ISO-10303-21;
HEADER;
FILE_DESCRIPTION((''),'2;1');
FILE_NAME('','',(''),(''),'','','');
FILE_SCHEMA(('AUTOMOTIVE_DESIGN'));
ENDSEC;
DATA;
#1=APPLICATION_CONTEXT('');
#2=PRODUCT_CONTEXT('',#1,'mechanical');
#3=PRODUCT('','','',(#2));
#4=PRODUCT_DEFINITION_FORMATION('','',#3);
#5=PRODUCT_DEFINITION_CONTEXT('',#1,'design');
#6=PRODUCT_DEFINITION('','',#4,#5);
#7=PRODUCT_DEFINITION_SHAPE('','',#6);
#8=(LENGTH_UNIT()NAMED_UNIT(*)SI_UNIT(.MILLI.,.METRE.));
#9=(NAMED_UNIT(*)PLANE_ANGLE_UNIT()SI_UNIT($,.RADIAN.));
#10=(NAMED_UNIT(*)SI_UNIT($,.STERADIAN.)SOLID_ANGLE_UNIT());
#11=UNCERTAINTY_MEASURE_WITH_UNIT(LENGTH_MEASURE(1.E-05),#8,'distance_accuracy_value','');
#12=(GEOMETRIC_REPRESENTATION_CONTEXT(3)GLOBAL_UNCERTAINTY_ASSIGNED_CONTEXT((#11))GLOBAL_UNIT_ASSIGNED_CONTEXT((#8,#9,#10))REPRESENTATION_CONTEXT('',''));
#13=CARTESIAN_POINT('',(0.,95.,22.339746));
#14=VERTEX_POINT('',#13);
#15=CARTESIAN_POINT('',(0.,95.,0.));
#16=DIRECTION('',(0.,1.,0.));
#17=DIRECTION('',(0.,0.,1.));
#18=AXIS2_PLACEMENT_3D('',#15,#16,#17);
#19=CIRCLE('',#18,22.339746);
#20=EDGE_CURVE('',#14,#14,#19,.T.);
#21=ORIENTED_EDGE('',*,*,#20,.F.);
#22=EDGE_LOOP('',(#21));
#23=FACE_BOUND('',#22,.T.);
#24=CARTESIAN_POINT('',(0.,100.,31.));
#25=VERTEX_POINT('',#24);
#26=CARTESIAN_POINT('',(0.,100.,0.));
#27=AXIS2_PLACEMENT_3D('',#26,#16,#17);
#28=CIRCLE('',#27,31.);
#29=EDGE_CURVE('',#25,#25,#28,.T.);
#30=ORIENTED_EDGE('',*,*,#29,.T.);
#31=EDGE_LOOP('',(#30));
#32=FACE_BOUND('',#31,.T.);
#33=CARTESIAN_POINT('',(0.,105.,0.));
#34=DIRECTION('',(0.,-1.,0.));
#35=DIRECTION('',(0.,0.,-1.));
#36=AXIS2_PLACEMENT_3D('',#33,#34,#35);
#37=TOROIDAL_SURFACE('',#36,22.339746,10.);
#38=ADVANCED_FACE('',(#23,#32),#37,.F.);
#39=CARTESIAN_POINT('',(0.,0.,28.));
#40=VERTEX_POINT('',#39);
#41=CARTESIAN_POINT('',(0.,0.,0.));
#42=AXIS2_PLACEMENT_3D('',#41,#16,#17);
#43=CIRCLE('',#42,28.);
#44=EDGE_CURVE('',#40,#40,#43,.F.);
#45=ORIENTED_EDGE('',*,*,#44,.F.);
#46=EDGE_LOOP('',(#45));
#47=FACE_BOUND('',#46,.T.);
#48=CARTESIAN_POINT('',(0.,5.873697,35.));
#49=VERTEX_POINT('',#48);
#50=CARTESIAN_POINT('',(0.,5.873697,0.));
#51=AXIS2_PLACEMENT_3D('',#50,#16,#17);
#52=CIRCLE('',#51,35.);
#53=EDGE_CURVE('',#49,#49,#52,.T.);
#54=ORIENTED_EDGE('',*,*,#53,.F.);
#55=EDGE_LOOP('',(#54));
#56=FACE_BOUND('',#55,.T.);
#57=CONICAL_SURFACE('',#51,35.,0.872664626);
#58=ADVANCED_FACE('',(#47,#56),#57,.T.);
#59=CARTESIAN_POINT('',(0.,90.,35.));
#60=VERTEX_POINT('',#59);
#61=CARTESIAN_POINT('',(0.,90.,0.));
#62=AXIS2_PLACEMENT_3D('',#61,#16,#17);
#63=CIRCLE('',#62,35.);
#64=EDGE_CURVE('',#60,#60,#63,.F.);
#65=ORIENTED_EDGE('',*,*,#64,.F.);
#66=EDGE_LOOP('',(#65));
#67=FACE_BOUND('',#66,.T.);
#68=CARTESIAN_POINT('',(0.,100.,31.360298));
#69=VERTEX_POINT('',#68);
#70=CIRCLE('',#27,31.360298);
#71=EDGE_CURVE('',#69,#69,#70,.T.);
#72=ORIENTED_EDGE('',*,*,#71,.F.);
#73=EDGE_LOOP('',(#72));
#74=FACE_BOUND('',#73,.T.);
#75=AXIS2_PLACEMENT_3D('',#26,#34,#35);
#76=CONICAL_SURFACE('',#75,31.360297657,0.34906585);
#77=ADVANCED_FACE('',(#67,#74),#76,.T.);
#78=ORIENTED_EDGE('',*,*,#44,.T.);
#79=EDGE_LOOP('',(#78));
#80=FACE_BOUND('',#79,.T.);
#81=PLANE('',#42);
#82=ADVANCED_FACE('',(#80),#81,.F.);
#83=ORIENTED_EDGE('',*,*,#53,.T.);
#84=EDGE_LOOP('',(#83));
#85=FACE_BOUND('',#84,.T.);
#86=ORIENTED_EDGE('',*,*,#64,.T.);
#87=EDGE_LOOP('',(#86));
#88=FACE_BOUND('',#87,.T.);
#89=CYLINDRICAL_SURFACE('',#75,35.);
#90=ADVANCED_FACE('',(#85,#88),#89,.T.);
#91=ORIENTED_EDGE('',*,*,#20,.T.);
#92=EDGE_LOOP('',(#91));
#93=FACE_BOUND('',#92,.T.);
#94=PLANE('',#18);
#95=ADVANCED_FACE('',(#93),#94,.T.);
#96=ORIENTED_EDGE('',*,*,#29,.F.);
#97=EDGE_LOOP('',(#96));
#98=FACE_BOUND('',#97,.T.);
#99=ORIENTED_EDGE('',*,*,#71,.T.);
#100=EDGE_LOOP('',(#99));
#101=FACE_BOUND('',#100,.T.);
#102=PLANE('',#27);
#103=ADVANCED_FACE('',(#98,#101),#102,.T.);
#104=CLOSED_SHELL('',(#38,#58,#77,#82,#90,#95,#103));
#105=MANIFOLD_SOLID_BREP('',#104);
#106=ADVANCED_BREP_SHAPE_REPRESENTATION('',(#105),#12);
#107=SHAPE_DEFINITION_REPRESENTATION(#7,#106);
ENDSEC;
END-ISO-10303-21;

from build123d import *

# Parameters (mm, degrees)
SKETCH1_R           = 35
BOSS_EXTRUDE1_DEPTH = 100
CHAMFER1_SIZE       = 10
CHAMFER1_SIZE2      = 3.639702343
CHAMFER2_SIZE       = 7
CHAMFER2_SIZE2      = 5.873697418
SKETCH2_R           = 31
CUT_EXTRUDE1_DEPTH  = 5
FILLET1_R           = 10


with BuildPart() as part:
    # Sketch1 → Boss-Extrude1 (new body)
    with BuildSketch(Plane(origin=(0, 0, 0), x_dir=(1, 0, 0), z_dir=(0, 1, 0))):
        with Locations(Location((0, 0, 0), (0, 0, 270))):
            Circle(SKETCH1_R)
    extrude(amount=BOSS_EXTRUDE1_DEPTH)

    # Chamfer1
    chamfer1_edges = [part.edges().sort_by_distance(p)[0] for p in [
        (0, 100, -35),
    ]]
    chamfer1_side = [part.faces().sort_by_distance(p)[0] for p in [
        (0, 50, -35),
    ]]
    chamfer(chamfer1_edges, length=CHAMFER1_SIZE, length2=CHAMFER1_SIZE2, reference=chamfer1_side[0])

    # Chamfer2
    chamfer2_edges = [part.edges().sort_by_distance(p)[0] for p in [
        (0, 0, -35),
    ]]
    chamfer2_side = [part.faces().sort_by_distance(p)[0] for p in [
        (0, 0, 0),
    ]]
    chamfer(chamfer2_edges, length=CHAMFER2_SIZE, length2=CHAMFER2_SIZE2, reference=chamfer2_side[0])

    # Sketch2 → Cut-Extrude1 (cut)
    with BuildSketch(Plane(origin=(0, 100, 0), x_dir=(1, 0, 0), z_dir=(0, 1, 0))):
        with Locations(Location((0, 0, 0), (0, 0, 270))):
            Circle(SKETCH2_R)
    extrude(amount=-CUT_EXTRUDE1_DEPTH, mode=Mode.SUBTRACT)

    # Fillet1
    # the kernel refuses this fillet: 10 mm, written as the material it adds along each edge
    with BuildSketch(Plane(origin=(0, 95, 0), x_dir=(0, 0, 1), z_dir=(-1, 0, 0))) as fillet1_piece_1:
        with BuildLine():
            CenterArc((22.339745962, 10), FILLET1_R, 270, 60)
            Line((22.339745962, 0), (22.339745962, -0.2))
            Line((22.339745962, -0.2), (31, -0.2))
            Line((31, -0.2), (31.2, 0))
            ThreePointArc((31.2, 0), (31.2, 2.5), (31.173205081, 4.9))
            Line((31.173205081, 4.9), (31, 5))
        make_face()
    revolve(axis=Axis((0, 95, 0), (0, 1, 0)))


solid = part.part
